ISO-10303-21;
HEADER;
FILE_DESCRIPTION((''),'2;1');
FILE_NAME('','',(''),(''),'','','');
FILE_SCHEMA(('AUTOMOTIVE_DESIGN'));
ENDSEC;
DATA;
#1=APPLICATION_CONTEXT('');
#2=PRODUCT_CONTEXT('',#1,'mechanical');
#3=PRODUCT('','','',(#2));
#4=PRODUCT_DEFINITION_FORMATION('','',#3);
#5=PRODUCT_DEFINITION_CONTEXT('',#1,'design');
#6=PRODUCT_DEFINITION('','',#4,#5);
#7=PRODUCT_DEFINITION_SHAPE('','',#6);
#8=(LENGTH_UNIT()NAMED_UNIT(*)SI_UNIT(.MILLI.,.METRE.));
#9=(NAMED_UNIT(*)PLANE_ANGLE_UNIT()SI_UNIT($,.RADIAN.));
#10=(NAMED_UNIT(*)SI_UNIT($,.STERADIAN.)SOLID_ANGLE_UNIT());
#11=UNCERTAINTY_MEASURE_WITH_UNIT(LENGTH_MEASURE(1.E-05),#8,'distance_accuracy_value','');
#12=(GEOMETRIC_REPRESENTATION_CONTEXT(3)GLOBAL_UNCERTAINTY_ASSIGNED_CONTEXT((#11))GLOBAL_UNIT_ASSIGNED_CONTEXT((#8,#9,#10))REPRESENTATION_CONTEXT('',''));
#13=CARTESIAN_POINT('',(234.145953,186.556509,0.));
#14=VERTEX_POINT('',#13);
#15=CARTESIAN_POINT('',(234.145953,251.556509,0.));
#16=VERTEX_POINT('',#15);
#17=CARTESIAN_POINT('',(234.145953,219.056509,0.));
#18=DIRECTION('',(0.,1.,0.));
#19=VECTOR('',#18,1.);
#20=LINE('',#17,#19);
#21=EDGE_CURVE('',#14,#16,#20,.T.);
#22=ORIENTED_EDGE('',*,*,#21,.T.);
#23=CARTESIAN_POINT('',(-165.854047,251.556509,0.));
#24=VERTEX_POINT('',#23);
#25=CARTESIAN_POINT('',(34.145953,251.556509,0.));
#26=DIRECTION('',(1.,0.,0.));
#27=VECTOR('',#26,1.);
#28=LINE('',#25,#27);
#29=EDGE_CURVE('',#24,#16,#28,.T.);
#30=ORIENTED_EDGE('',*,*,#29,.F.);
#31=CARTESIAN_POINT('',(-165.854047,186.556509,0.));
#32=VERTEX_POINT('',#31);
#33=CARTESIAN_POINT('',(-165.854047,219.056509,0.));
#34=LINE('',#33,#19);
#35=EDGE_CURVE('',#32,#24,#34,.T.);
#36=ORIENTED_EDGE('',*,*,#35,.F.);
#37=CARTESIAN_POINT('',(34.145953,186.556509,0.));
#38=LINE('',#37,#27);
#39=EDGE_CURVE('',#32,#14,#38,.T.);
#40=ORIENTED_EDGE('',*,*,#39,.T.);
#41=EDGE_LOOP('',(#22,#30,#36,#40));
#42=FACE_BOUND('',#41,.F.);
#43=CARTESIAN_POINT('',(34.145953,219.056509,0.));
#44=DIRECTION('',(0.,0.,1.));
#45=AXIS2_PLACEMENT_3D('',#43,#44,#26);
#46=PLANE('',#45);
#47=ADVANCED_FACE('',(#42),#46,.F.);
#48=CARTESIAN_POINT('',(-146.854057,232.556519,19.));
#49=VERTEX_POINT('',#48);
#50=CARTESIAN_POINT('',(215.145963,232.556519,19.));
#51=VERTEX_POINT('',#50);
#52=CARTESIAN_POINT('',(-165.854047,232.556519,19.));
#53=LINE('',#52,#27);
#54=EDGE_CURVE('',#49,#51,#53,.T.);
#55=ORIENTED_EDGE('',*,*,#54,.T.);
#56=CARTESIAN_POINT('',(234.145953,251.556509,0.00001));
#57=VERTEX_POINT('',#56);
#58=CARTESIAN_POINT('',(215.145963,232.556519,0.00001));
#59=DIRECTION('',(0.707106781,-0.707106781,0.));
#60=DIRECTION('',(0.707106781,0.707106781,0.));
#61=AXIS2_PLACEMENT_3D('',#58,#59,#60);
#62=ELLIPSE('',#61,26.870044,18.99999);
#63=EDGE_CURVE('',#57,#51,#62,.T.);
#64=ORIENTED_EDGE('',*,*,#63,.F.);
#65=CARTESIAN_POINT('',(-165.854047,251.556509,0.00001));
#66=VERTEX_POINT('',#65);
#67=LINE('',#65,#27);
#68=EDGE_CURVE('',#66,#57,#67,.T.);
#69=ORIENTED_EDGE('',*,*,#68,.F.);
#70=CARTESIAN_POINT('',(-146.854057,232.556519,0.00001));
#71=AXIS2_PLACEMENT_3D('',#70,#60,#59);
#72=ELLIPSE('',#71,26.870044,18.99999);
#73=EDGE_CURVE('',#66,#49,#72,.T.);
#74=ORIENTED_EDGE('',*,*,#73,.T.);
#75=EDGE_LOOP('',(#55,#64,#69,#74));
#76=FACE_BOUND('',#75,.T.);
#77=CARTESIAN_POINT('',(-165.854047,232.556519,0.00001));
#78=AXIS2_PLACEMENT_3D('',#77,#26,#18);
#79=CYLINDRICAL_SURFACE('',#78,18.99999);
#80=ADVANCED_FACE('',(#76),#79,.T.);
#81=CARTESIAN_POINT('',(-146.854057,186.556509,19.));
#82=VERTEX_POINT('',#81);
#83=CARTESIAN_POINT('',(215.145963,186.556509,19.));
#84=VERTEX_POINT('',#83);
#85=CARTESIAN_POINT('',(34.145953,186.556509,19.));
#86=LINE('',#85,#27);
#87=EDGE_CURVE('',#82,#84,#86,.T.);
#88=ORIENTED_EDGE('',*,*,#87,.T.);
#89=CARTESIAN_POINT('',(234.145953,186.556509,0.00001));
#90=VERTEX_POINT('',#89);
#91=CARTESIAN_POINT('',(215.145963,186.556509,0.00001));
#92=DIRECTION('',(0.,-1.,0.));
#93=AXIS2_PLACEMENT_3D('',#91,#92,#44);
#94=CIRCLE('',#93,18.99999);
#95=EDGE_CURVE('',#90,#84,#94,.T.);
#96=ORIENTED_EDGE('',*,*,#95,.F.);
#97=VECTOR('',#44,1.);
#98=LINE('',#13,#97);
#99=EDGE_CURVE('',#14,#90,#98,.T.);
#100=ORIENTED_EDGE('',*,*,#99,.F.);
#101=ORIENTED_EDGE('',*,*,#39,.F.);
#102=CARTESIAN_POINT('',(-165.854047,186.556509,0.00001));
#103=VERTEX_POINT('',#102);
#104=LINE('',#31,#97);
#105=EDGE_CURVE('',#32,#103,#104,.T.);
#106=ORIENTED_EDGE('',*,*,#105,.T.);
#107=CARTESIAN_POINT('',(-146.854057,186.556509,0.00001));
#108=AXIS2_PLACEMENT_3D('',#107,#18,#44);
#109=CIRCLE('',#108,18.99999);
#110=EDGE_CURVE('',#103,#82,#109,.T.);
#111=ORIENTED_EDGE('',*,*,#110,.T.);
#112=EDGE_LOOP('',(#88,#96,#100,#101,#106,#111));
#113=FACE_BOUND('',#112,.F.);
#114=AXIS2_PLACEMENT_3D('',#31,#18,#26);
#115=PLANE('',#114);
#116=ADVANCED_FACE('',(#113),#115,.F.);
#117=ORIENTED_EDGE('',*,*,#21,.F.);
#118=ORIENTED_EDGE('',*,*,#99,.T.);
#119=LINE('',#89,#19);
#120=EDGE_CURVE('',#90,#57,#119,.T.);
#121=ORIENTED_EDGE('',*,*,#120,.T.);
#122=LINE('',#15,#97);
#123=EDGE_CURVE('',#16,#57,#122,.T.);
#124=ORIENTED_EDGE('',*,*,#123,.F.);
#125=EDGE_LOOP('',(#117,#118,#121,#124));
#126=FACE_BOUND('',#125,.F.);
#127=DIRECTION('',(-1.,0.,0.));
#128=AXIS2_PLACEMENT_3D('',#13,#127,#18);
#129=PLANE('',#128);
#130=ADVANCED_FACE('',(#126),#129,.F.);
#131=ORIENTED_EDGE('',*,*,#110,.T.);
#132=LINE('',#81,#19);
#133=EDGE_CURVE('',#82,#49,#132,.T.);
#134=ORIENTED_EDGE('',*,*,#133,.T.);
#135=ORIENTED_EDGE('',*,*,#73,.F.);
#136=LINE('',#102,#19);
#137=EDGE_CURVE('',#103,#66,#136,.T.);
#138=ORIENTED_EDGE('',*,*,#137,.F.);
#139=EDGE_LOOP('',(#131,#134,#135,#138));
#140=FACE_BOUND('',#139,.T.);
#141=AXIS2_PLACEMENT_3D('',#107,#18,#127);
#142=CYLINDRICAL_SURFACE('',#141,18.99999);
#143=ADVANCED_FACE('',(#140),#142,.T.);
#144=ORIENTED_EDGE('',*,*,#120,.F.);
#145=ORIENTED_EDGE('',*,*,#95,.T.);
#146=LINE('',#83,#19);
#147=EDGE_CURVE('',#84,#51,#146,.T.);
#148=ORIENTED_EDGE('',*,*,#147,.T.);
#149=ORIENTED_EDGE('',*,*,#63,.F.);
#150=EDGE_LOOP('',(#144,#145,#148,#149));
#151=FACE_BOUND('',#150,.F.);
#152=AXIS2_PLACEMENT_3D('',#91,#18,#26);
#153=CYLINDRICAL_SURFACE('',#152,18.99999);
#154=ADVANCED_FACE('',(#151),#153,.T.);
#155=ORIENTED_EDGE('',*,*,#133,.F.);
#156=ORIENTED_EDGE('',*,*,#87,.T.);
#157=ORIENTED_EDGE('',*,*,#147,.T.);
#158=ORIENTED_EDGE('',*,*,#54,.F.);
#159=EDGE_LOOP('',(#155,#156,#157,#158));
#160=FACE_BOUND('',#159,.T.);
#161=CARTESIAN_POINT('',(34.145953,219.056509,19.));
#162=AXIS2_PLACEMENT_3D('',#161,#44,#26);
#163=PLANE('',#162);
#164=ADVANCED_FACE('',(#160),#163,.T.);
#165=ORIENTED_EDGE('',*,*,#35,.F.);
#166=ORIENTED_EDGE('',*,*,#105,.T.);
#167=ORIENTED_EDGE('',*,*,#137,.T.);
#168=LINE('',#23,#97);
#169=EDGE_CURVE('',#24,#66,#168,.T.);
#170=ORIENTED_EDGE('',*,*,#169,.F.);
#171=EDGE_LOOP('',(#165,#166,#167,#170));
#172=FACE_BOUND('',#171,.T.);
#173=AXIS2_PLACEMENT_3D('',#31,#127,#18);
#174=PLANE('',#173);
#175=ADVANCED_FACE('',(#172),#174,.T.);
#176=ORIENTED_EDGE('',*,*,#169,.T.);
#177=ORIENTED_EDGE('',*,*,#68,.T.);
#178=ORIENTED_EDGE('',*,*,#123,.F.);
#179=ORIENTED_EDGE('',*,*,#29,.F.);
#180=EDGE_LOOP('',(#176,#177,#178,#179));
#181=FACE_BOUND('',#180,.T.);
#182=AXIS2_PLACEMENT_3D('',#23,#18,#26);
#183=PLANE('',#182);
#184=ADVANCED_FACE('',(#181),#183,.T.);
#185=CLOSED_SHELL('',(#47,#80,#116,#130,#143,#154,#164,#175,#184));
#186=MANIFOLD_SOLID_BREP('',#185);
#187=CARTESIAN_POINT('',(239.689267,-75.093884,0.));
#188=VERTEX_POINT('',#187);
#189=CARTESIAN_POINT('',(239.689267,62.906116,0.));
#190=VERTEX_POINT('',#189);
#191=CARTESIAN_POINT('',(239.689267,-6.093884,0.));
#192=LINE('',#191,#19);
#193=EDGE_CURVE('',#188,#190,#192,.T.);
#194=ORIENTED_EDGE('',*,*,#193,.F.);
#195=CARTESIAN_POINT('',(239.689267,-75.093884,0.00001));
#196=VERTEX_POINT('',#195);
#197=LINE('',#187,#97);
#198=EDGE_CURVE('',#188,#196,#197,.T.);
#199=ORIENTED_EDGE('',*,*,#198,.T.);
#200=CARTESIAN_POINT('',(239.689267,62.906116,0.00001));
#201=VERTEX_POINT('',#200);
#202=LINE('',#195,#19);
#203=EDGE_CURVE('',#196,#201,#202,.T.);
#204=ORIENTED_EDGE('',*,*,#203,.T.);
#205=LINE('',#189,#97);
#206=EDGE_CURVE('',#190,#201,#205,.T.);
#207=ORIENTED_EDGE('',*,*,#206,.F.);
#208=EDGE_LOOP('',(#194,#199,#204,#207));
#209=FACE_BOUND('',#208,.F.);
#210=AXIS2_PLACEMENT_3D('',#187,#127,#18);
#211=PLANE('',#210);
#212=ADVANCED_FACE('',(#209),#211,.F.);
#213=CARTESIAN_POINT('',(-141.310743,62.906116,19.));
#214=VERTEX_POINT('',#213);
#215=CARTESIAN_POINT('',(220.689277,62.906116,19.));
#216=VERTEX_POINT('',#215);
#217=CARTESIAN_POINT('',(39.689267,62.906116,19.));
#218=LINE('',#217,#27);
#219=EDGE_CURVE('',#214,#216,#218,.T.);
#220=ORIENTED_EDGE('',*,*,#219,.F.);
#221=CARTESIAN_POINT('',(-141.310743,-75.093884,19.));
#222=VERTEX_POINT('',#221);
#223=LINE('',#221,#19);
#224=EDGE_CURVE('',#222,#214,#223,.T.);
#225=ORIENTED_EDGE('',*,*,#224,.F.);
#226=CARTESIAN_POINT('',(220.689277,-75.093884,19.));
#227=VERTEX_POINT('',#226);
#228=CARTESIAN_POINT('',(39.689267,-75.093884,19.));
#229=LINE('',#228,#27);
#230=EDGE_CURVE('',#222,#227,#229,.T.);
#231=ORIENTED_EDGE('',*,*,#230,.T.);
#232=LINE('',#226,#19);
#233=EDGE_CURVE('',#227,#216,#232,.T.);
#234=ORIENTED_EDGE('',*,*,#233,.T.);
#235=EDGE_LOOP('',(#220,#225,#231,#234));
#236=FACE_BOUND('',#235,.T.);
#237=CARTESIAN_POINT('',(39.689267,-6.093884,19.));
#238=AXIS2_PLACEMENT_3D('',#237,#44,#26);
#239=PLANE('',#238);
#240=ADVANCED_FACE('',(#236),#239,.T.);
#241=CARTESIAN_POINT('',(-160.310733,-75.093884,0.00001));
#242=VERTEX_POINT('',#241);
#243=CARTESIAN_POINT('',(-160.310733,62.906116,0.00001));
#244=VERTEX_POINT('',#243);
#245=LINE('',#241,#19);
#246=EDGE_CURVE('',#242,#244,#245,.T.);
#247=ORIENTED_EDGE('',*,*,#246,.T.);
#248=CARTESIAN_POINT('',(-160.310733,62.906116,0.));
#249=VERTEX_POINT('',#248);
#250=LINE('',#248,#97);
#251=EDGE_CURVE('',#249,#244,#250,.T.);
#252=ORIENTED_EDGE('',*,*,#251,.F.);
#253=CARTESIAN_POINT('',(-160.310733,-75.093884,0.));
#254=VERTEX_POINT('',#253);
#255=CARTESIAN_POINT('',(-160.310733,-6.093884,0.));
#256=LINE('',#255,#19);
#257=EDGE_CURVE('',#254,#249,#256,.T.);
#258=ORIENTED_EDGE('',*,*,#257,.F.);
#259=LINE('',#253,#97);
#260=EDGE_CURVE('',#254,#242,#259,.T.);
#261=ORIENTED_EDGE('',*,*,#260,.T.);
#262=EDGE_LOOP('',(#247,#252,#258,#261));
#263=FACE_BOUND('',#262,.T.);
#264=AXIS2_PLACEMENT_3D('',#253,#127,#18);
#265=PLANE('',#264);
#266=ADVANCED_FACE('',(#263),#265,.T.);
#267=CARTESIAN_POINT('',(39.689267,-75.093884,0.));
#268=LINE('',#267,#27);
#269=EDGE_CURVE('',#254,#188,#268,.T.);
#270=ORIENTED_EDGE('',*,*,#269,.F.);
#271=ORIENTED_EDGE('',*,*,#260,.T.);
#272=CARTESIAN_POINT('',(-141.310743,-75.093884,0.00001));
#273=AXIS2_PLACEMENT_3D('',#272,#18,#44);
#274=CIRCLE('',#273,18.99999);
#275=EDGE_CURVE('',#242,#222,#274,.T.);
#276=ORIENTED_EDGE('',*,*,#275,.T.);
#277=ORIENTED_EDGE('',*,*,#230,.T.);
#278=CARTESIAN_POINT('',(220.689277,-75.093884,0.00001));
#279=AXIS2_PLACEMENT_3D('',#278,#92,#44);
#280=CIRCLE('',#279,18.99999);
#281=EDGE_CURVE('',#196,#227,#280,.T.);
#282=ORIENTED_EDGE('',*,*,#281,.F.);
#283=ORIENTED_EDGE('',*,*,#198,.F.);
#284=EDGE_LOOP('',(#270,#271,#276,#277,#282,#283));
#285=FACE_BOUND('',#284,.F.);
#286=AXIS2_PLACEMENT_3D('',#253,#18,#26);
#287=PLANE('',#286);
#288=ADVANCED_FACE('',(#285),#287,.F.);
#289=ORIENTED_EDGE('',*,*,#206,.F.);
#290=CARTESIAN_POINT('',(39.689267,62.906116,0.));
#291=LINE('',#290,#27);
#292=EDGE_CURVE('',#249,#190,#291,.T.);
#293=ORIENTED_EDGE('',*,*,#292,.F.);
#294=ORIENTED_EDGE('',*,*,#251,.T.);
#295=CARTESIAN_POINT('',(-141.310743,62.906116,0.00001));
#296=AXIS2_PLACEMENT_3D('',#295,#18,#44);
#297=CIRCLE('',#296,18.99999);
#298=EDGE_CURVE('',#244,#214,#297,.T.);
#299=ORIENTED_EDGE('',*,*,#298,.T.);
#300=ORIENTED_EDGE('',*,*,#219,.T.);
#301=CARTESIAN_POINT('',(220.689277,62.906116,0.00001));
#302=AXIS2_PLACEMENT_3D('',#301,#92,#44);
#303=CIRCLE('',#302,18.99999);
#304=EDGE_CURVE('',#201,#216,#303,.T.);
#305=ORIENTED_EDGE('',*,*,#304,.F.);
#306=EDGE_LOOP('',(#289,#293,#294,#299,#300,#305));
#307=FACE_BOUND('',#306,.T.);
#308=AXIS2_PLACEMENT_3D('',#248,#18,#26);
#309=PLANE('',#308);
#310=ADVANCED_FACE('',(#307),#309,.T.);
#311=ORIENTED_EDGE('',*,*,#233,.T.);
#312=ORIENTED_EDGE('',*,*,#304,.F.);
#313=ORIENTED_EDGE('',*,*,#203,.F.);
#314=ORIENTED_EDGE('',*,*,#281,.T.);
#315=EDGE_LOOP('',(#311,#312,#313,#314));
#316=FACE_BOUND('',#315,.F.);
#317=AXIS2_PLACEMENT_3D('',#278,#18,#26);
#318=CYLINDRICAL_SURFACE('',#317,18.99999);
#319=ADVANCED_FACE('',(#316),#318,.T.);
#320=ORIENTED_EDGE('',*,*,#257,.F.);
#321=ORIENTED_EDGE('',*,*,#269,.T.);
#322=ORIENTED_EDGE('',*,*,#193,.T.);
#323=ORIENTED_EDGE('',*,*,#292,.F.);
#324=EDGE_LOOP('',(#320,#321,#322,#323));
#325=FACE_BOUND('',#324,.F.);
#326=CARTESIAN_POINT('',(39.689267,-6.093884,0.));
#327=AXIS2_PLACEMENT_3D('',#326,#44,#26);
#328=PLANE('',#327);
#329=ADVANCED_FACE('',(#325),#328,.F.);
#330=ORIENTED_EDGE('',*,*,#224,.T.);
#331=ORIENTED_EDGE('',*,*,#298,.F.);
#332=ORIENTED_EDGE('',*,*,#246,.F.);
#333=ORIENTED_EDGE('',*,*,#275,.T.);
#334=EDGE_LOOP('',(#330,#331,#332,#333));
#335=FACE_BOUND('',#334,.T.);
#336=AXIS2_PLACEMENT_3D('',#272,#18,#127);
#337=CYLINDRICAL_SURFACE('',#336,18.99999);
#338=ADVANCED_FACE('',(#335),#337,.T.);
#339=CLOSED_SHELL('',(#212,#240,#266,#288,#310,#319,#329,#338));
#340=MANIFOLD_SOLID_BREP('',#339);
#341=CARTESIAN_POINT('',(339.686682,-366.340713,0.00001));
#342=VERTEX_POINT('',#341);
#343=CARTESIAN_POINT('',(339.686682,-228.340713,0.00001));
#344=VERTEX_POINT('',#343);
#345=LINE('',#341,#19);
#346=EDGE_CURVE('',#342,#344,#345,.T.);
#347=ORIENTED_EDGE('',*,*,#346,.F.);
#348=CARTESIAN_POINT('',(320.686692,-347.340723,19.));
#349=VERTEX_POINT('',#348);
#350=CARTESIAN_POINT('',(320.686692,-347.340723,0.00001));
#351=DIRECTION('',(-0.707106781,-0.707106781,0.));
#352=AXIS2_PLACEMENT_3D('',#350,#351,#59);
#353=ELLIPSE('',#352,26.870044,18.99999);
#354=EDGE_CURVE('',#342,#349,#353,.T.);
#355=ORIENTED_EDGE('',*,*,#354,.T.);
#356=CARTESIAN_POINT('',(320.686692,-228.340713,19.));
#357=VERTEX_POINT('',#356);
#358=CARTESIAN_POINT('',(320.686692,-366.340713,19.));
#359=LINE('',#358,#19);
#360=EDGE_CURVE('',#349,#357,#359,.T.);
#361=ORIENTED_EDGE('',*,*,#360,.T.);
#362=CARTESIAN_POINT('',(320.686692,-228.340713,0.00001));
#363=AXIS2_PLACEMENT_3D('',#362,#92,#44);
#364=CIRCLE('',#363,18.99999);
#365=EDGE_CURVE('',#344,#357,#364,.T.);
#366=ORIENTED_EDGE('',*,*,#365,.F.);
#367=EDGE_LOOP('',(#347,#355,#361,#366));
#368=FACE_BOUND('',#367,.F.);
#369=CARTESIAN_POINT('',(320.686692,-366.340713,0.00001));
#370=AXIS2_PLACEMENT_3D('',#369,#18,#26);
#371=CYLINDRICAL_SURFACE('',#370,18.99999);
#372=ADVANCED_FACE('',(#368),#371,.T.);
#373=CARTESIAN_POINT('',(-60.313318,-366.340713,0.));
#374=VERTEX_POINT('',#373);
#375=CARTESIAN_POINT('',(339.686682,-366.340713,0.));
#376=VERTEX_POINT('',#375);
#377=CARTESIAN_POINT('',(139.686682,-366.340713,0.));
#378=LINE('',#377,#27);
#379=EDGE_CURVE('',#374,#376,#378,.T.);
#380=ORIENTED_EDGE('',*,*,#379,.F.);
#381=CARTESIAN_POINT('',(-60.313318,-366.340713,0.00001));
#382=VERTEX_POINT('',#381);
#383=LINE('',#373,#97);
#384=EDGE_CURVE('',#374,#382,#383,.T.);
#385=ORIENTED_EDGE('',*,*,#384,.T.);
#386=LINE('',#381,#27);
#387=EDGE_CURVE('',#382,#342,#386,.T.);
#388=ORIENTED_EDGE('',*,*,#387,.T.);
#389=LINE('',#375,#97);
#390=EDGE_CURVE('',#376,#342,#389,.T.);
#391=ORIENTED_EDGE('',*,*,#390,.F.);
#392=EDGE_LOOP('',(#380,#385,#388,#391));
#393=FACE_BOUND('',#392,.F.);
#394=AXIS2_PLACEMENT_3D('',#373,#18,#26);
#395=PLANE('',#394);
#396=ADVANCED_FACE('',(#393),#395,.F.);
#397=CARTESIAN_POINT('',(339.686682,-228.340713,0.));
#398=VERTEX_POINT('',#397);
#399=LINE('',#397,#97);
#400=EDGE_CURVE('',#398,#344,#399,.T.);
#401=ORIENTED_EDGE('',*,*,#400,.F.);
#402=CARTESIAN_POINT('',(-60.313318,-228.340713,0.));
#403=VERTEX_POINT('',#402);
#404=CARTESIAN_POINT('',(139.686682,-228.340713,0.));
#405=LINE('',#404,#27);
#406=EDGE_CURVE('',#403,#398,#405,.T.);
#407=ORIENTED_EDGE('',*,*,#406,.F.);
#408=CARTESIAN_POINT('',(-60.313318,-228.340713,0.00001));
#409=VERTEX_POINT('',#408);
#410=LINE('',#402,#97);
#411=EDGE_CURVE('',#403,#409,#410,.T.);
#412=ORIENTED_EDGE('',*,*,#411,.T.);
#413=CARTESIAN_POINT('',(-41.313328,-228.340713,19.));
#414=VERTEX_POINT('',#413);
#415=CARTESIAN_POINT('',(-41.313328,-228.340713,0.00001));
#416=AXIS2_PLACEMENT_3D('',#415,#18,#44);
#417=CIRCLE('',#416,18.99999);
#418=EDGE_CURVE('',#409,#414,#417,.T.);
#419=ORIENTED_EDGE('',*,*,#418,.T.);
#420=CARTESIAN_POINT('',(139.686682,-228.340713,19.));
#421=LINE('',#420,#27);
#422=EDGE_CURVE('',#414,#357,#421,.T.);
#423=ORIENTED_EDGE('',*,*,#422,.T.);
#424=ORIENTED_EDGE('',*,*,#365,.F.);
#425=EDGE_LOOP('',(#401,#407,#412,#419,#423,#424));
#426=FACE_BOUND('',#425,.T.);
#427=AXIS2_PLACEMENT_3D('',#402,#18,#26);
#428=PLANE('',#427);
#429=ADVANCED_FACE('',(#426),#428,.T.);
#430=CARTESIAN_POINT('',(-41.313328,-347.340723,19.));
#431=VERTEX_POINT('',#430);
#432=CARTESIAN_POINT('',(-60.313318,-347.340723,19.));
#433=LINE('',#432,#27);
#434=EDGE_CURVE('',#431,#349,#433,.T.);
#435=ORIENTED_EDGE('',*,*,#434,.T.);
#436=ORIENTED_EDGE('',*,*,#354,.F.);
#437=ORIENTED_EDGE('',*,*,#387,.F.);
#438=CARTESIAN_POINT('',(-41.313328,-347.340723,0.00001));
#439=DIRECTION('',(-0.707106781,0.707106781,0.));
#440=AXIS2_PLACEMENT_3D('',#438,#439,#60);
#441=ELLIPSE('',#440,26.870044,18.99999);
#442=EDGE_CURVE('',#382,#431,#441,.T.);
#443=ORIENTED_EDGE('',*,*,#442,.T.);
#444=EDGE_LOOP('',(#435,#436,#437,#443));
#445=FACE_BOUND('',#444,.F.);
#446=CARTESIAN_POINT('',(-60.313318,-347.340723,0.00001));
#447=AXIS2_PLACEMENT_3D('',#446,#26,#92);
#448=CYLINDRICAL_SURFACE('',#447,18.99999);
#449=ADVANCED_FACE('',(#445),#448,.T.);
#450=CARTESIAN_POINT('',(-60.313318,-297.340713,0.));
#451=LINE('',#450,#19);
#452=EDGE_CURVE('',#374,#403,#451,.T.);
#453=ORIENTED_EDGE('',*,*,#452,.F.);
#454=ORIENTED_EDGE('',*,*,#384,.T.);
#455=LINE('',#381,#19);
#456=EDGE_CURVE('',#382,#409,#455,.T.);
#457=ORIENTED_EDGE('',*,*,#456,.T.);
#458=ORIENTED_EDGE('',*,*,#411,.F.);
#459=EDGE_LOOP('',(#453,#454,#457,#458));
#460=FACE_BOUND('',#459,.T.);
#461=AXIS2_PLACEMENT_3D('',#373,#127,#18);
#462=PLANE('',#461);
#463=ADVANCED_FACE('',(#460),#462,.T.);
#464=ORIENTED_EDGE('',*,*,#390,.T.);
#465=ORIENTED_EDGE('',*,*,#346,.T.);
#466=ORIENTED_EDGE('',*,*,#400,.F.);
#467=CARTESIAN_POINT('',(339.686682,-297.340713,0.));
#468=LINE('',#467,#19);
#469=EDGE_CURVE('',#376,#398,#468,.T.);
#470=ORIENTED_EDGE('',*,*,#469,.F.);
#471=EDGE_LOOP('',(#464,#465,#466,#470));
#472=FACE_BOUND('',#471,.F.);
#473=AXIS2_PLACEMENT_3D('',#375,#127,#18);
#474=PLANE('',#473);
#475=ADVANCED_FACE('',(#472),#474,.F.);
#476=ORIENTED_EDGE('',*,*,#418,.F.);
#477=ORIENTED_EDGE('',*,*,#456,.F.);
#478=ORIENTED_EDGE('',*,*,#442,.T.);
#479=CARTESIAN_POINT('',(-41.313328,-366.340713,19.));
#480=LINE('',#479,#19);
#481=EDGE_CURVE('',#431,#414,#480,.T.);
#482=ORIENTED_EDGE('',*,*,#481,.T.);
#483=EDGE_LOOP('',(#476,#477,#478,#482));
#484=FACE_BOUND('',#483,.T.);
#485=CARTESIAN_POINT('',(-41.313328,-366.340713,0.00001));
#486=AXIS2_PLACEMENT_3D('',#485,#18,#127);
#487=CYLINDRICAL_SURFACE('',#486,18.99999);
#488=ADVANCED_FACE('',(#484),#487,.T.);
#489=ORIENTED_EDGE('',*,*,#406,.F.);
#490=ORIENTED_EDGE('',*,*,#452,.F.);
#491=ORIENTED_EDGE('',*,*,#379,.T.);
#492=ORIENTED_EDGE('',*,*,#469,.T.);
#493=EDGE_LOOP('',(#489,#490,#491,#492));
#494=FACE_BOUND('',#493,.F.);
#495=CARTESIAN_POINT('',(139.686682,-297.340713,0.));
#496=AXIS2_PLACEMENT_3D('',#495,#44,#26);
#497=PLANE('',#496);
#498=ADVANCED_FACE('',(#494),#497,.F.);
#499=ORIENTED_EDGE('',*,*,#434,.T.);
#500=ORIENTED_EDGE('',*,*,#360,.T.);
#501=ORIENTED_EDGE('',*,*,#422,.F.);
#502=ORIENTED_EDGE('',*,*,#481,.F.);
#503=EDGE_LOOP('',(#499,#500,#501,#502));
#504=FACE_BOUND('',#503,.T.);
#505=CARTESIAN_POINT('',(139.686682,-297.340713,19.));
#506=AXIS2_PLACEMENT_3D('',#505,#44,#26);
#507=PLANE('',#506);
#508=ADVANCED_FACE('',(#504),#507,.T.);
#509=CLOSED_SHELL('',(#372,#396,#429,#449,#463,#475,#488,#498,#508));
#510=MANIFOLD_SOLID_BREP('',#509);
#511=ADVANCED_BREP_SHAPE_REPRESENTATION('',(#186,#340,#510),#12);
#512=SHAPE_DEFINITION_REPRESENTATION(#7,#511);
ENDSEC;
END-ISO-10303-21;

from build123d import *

# Parameters (mm, degrees)
F2_W     = 400
F2_H     = 65
F3_DEPTH = 19
F0_W     = 400
F0_H     = 138
F4_DEPTH = 19
F1_W     = 400
F1_H     = 138
F5_DEPTH = 19
F6_R     = 18.99999
F6_2_R   = 18.99999
F6_3_R   = 18.99999


# Not quite as in the source:
# - a fillet or chamfer is up to 0.001 mm smaller than in the source, because OpenCascade refuses the exact size


with BuildPart() as f3:
    # F2 (on Top) → F3 (new body)
    with BuildSketch(Plane.XY):
        with Locations((34.1459533652, 219.0565094352)):
            Rectangle(F2_W, F2_H)
    extrude(amount=F3_DEPTH)

    # F6#3 (radius 19 in the source; OpenCascade refuses exactly that, so slightly less here)
    f6_3_edges = [f3.edges().sort_by_distance(p)[0] for p in [
        (234.145953, 219.056509, 19),
        (34.145953, 251.556509, 19),
        (-165.854047, 219.056509, 19),
    ]]
    fillet(f6_3_edges, radius=F6_3_R)


with BuildPart() as f4:
    # F0 (on Top) → F4 (new body)
    with BuildSketch(Plane.XY):
        with Locations((39.6892666308, -6.0938838869)):
            Rectangle(F0_W, F0_H)
    extrude(amount=F4_DEPTH)

    # F6#2 (radius 19 in the source; OpenCascade refuses exactly that, so slightly less here)
    f6_2_edges = [f4.edges().sort_by_distance(p)[0] for p in [
        (-160.310733, -6.093884, 19),
        (239.689267, -6.093884, 19),
    ]]
    fillet(f6_2_edges, radius=F6_2_R)


with BuildPart() as f5:
    # F1 (on Top) → F5 (new body)
    with BuildSketch(Plane.XY):
        with Locations((139.6866820736, -297.3407134414)):
            Rectangle(F1_W, F1_H)
    extrude(amount=F5_DEPTH)

    # F6 (radius 19 in the source; OpenCascade refuses exactly that, so slightly less here)
    f6_edges = [f5.edges().sort_by_distance(p)[0] for p in [
        (139.686682, -366.340713, 19),
        (-60.313318, -297.340713, 19),
        (339.686682, -297.340713, 19),
    ]]
    fillet(f6_edges, radius=F6_R)


solid = Compound([f3.part, f4.part, f5.part])
